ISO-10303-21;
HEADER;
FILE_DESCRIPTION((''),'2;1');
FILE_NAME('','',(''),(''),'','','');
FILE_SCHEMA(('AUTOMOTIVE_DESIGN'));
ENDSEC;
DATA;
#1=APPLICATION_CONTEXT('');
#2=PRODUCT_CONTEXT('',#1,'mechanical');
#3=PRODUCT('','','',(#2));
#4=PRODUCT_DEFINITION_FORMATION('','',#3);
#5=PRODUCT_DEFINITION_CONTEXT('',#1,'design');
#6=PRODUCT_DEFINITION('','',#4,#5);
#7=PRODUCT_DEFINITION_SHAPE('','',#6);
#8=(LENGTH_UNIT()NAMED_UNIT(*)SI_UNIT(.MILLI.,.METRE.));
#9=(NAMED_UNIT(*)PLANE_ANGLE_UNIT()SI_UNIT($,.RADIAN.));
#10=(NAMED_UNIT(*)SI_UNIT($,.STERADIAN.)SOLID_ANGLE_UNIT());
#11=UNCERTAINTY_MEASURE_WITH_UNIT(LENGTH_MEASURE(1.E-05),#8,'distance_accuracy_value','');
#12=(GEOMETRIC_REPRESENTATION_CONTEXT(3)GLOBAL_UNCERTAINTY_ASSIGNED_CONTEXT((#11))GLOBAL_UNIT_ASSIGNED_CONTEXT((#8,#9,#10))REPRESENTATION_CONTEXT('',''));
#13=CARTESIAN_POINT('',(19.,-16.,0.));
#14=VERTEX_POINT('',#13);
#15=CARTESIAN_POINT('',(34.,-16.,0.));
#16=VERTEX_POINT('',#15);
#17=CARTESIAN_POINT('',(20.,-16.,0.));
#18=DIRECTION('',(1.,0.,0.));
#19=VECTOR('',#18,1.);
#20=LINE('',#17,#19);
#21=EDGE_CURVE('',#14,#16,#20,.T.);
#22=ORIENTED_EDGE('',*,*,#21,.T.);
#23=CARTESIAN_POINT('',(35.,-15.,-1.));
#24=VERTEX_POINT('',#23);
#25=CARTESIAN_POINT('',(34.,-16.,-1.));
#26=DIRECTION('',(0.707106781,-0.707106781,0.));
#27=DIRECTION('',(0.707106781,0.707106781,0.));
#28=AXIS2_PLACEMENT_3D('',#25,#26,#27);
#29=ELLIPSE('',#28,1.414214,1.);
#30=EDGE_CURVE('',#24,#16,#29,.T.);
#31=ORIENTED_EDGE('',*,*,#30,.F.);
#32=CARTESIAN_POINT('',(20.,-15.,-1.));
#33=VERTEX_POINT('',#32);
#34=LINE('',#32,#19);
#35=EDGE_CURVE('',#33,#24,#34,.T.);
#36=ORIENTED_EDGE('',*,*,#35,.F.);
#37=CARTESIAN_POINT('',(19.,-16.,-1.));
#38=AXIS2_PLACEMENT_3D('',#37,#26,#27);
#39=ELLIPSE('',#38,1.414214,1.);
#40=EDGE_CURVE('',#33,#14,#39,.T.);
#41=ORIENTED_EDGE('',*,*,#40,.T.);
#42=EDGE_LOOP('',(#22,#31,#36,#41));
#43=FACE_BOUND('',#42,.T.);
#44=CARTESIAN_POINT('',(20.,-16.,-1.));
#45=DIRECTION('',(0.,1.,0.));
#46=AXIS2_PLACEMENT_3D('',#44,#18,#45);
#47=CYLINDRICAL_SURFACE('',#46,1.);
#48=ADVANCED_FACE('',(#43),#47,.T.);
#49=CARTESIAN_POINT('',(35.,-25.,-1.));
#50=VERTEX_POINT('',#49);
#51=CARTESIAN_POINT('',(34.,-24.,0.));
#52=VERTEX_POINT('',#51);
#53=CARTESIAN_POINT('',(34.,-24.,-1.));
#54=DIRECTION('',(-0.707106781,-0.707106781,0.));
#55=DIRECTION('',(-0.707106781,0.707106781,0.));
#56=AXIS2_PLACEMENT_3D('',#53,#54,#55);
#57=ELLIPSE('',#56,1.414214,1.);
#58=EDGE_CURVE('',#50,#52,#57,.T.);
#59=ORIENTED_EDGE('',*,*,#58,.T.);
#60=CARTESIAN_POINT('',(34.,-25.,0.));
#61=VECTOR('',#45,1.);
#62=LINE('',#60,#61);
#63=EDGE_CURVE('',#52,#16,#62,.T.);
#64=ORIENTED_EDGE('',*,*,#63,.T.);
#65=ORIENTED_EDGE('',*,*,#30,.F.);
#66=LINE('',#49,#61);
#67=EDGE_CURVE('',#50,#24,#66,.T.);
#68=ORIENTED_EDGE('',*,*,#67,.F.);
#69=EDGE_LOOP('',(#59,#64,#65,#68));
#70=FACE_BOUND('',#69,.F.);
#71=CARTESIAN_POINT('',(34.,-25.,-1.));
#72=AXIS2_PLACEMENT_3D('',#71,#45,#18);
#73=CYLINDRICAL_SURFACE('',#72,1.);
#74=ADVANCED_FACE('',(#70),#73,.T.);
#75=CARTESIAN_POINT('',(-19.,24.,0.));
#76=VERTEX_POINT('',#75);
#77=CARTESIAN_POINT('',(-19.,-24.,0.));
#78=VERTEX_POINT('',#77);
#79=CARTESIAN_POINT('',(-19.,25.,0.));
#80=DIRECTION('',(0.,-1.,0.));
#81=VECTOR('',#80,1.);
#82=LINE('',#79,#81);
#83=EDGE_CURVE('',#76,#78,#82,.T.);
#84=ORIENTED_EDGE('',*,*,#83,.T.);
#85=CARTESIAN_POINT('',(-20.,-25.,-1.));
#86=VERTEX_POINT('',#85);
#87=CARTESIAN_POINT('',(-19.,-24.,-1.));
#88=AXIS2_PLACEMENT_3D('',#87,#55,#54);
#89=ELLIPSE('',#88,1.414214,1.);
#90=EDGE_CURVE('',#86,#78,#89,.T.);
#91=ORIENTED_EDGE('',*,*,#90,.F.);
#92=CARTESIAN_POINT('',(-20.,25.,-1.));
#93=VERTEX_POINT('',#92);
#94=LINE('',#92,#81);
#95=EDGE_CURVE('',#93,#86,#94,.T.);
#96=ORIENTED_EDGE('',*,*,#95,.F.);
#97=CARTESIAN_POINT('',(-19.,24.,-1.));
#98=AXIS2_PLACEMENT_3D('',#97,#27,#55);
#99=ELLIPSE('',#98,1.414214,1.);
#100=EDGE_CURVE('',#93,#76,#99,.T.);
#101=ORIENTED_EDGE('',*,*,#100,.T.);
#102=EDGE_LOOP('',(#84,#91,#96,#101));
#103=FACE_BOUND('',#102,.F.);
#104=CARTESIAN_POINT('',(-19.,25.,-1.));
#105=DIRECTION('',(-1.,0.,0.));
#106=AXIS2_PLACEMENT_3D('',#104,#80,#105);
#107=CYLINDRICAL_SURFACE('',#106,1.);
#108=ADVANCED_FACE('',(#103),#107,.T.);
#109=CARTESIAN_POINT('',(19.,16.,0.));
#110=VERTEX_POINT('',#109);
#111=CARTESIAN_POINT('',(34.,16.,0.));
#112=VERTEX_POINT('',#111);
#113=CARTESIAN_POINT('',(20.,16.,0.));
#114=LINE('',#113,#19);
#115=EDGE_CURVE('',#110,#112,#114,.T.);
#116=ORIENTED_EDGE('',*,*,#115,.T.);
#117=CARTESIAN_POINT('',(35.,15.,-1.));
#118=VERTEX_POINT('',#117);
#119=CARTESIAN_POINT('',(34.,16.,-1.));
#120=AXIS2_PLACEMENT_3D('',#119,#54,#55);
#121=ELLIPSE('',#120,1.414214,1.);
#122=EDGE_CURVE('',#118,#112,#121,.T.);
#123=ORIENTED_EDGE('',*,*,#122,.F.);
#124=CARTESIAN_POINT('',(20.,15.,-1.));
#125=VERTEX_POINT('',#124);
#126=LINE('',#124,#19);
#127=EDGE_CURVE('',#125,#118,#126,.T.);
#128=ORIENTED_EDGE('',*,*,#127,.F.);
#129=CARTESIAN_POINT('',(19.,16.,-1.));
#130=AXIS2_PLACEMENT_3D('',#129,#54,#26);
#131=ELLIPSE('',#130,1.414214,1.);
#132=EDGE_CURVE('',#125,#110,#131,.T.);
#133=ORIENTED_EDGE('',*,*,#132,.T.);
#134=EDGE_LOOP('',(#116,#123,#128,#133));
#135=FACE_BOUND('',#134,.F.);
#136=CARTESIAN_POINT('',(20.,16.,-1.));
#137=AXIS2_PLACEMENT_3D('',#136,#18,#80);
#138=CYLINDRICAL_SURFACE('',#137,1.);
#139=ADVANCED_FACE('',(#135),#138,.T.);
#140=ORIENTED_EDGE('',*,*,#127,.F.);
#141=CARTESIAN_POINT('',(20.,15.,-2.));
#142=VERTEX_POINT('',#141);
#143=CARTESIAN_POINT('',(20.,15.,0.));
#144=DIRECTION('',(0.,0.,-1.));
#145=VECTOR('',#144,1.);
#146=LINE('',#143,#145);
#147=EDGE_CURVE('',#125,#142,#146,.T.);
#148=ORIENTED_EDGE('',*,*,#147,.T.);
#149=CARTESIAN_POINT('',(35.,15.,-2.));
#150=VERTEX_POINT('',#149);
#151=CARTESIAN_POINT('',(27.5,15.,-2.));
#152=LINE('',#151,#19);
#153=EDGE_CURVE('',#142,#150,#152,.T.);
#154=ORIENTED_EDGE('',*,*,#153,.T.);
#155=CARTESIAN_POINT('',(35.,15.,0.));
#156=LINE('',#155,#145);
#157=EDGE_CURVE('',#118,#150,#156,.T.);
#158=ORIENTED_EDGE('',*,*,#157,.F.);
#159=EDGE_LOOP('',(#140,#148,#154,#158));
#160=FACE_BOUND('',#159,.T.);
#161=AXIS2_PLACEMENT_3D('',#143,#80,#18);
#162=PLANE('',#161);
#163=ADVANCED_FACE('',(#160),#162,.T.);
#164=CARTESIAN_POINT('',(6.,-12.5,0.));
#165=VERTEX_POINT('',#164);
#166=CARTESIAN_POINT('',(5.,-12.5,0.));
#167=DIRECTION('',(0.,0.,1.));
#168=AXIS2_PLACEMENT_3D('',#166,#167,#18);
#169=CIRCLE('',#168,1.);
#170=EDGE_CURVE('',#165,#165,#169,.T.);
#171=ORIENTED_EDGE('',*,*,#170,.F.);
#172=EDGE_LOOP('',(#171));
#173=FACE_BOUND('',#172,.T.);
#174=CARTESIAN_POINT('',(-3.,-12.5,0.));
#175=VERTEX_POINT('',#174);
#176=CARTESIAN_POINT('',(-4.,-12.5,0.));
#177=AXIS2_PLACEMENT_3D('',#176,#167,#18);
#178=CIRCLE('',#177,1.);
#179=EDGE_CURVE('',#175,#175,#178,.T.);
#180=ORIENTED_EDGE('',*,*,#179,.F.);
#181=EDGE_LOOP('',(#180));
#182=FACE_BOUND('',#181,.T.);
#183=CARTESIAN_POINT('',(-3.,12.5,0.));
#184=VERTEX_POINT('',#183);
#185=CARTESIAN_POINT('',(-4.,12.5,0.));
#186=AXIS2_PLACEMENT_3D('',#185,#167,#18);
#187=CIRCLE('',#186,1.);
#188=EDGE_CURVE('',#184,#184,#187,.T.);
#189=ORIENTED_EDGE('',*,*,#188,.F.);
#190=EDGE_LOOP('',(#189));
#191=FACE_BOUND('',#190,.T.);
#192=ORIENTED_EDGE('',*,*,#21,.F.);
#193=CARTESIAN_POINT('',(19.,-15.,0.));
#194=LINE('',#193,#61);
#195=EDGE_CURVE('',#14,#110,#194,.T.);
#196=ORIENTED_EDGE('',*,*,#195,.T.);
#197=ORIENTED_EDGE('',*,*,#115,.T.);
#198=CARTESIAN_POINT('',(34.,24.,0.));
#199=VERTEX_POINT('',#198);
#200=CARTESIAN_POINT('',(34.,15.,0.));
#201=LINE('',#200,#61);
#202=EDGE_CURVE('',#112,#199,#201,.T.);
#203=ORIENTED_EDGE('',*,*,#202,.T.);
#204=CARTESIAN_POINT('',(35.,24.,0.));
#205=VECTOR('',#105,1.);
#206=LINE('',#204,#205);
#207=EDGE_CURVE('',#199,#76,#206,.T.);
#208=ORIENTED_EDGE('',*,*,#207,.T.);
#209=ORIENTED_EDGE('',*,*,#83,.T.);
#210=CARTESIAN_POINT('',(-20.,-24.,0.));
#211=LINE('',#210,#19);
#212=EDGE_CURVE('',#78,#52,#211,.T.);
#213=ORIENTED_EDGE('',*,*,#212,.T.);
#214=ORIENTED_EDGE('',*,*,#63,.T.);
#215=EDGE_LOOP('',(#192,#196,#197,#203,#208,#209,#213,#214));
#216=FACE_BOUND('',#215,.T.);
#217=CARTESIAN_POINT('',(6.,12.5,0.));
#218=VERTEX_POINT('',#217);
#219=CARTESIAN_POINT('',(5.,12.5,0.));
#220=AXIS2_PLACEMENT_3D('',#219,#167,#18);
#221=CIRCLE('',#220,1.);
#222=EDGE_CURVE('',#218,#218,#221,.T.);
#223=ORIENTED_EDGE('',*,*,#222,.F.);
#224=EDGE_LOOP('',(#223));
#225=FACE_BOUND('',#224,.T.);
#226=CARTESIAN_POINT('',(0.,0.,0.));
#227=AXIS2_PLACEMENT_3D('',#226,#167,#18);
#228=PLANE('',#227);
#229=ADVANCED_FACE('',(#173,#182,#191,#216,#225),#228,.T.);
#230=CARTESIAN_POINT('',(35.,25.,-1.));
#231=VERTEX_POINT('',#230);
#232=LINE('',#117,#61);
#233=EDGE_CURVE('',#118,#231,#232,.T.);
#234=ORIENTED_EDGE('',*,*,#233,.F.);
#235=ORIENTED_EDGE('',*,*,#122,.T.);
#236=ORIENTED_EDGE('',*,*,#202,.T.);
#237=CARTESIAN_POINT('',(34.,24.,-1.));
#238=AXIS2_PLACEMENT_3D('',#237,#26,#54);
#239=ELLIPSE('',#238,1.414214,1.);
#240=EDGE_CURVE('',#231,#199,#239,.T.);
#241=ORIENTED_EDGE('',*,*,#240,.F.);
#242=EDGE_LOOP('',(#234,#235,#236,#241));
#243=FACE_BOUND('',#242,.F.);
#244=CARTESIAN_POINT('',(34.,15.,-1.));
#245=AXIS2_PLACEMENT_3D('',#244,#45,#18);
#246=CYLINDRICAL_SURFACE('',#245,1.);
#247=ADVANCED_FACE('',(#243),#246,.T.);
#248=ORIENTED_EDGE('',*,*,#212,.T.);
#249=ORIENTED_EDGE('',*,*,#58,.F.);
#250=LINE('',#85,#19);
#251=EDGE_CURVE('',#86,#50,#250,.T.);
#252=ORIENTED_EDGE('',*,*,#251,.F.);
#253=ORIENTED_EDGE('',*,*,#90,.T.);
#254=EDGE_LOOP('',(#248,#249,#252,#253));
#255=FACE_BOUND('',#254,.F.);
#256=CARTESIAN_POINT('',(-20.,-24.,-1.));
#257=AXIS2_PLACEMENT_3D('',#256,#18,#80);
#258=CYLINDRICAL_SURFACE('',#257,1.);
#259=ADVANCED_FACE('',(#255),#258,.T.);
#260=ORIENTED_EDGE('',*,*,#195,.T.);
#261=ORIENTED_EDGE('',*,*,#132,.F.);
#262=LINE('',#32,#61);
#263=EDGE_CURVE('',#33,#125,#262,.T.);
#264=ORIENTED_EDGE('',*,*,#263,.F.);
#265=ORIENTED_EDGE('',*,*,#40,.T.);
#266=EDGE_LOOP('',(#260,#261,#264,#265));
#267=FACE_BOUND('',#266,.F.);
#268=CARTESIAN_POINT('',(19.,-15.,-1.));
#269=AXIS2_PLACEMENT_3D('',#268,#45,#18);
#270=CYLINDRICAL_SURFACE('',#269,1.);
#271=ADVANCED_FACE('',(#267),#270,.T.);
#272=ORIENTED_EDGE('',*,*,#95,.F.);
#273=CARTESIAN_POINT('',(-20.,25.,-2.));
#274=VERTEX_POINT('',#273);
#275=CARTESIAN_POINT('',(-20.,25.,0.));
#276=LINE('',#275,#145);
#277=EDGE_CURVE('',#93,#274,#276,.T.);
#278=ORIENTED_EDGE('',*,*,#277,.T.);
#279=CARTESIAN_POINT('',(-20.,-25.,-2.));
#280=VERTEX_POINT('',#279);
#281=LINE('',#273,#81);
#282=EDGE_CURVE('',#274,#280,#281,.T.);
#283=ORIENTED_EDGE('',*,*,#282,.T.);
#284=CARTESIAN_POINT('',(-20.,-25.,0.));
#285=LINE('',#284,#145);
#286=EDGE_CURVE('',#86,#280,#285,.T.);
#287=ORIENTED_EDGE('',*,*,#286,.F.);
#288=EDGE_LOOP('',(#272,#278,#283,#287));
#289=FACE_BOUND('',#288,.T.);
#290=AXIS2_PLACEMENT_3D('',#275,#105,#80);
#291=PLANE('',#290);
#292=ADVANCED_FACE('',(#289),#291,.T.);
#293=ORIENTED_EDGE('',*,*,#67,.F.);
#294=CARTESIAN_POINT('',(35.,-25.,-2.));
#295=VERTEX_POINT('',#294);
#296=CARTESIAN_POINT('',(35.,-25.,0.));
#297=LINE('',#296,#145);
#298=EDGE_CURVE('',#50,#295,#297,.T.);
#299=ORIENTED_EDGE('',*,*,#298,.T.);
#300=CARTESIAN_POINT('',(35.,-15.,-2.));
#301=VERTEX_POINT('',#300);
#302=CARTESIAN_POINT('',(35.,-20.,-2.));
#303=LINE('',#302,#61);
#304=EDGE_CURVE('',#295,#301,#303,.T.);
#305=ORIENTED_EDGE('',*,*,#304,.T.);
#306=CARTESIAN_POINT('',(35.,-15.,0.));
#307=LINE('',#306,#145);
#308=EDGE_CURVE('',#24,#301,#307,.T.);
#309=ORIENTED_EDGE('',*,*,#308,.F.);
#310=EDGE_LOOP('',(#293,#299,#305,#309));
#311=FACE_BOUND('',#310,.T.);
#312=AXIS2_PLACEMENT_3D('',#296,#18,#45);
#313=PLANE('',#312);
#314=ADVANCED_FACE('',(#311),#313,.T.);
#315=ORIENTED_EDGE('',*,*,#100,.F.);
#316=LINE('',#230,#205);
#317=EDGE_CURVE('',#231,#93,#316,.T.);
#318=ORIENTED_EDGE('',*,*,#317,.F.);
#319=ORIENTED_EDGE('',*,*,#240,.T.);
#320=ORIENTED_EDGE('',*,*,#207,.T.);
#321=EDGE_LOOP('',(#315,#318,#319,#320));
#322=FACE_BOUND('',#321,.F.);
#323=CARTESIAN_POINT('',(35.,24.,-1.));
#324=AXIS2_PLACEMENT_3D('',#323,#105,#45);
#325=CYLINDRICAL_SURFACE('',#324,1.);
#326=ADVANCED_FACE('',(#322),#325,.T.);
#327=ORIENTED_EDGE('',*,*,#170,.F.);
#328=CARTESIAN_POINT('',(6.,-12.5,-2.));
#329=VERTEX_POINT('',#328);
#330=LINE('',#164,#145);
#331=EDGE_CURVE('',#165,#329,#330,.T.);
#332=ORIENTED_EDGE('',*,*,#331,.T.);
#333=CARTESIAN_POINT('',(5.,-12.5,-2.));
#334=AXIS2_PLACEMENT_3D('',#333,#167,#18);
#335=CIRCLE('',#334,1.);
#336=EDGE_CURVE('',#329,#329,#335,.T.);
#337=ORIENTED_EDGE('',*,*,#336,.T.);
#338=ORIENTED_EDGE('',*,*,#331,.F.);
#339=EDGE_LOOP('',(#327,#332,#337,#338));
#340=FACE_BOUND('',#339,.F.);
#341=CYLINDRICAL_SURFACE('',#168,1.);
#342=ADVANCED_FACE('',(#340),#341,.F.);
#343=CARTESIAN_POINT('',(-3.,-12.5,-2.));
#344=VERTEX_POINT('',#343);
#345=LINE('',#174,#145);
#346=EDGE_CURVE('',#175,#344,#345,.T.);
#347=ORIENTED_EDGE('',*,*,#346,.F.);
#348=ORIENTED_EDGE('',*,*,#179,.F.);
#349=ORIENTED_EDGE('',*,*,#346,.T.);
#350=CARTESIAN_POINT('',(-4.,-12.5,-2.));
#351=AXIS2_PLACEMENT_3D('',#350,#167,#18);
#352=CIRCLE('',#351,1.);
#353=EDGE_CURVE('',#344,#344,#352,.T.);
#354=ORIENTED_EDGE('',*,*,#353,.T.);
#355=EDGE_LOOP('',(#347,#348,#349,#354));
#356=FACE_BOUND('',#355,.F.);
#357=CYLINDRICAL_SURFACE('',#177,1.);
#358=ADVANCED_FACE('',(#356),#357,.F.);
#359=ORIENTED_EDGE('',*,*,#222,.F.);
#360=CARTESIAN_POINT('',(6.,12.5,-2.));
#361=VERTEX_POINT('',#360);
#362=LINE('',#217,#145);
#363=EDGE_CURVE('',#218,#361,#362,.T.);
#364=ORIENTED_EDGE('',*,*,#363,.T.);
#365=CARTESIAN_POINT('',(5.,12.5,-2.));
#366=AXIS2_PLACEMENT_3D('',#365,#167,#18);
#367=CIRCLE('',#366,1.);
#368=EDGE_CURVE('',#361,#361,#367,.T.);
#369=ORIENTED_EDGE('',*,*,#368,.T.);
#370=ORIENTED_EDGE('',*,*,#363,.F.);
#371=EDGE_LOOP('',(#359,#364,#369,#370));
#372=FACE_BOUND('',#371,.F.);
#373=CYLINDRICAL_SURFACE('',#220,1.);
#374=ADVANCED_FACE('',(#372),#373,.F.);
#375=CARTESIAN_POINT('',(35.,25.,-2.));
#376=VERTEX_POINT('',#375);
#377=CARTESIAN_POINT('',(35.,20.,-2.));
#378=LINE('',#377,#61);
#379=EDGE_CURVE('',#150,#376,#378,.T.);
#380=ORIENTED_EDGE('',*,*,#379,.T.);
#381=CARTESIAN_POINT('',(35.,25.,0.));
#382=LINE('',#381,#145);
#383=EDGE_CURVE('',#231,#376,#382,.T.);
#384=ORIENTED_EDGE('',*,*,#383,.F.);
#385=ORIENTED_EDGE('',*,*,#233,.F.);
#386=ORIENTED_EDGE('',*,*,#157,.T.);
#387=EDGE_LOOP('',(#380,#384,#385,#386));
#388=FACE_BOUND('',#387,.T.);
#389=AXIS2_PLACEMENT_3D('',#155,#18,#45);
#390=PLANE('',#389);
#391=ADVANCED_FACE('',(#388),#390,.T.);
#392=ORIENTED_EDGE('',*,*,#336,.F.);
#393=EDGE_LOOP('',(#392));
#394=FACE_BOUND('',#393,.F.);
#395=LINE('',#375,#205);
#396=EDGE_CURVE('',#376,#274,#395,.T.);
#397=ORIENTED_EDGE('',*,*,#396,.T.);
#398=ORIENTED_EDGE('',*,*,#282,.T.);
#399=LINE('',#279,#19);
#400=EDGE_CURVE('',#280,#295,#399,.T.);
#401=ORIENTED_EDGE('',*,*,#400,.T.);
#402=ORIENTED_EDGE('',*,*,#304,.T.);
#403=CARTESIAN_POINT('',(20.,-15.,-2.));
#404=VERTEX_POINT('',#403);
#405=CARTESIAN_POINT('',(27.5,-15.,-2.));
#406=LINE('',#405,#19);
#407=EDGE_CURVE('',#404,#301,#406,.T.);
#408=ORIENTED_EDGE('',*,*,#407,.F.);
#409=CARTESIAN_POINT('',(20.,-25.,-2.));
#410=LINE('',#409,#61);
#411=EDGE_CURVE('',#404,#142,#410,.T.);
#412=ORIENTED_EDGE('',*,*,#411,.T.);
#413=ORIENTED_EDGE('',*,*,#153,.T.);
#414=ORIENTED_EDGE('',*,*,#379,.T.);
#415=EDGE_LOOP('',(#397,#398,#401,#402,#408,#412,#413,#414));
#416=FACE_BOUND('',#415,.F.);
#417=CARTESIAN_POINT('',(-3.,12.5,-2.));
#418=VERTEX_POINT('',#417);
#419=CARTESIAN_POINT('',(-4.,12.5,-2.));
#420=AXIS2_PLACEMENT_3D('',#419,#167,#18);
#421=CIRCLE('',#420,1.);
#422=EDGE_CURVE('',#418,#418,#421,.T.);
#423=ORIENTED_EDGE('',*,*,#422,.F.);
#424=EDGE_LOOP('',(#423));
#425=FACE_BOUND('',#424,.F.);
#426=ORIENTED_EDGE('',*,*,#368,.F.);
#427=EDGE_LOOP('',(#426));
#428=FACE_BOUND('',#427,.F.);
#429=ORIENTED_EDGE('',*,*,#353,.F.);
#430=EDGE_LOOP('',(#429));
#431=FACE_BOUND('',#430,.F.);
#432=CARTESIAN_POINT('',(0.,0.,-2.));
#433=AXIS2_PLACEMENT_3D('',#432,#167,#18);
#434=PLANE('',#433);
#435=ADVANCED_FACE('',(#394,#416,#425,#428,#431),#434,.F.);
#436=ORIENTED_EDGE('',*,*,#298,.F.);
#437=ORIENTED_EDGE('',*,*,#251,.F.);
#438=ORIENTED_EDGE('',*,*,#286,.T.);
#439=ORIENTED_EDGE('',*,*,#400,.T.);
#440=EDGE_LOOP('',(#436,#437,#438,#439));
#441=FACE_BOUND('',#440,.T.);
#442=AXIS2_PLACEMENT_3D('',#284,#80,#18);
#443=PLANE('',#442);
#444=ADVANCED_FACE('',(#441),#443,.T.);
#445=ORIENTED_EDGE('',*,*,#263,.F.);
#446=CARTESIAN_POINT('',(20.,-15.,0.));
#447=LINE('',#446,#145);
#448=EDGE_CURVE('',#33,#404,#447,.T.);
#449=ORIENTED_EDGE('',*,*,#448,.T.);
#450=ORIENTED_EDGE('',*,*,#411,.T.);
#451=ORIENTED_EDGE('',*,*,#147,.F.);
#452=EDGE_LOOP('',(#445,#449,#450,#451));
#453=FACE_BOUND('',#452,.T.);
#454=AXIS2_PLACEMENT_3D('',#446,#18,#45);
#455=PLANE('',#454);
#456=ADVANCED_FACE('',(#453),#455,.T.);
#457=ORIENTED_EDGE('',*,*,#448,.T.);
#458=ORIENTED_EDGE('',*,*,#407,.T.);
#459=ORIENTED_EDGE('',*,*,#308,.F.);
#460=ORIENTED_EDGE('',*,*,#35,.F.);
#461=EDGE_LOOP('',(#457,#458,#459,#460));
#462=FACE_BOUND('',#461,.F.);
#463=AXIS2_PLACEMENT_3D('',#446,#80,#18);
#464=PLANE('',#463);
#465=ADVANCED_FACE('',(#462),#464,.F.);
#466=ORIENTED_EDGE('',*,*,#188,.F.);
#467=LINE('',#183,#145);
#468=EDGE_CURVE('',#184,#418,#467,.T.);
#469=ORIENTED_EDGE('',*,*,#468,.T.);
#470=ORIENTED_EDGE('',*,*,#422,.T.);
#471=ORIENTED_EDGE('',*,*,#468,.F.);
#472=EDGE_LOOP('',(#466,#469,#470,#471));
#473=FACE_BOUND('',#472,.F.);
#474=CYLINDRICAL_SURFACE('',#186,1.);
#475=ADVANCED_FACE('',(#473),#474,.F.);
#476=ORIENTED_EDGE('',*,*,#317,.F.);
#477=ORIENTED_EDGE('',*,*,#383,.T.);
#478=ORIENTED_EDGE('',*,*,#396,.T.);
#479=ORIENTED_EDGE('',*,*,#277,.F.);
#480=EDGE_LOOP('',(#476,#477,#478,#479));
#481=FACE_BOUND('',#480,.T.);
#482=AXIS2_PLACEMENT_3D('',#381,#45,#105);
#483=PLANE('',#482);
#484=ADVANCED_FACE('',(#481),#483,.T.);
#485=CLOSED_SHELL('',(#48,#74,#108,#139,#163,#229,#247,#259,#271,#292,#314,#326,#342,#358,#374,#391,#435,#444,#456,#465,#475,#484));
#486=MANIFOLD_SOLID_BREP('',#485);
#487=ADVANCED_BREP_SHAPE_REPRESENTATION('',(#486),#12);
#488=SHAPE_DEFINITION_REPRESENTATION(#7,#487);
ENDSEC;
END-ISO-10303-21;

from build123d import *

# Parameters (mm, degrees)
F0_R     = 1
F0_W     = 15
F0_H     = 10
F1_DEPTH = 2
F2_R     = 1


# Not quite as in the source:
# - a feature names something its author has since deleted; it is built from what else it names


with BuildPart() as f1:
    # F0 (on Top) → F1 (new body)
    with BuildSketch(Plane.XY):
        Polygon((-20, -25), (20, -25), (20, -15), (20, 15), (20, 25), (-20, 25), align=None)
        with Locations((-4, -12.5)):
            Circle(F0_R, mode=Mode.SUBTRACT)
        with Locations((5, -12.5)):
            Circle(F0_R, mode=Mode.SUBTRACT)
        with Locations((-4, 12.5)):
            Circle(F0_R, mode=Mode.SUBTRACT)
        with Locations((5, 12.5)):
            Circle(F0_R, mode=Mode.SUBTRACT)
        with Locations((27.5, -20)):
            Rectangle(F0_W, F0_H)
        with Locations((27.5, 20)):
            Rectangle(F0_W, F0_H)
    extrude(amount=-F1_DEPTH)

    # F2
    f2_edges = [f1.edges().sort_by_distance(p)[0] for p in [
        (7.5, 25, 0),
        (-20, 0, 0),
        (35, 20, 0),
        (27.5, 15, 0),
        (20, 0, 0),
        (27.5, -15, 0),
        (35, -20, 0),
        (7.5, -25, 0),
    ]]
    fillet(f2_edges, radius=F2_R)


solid = f1.part
